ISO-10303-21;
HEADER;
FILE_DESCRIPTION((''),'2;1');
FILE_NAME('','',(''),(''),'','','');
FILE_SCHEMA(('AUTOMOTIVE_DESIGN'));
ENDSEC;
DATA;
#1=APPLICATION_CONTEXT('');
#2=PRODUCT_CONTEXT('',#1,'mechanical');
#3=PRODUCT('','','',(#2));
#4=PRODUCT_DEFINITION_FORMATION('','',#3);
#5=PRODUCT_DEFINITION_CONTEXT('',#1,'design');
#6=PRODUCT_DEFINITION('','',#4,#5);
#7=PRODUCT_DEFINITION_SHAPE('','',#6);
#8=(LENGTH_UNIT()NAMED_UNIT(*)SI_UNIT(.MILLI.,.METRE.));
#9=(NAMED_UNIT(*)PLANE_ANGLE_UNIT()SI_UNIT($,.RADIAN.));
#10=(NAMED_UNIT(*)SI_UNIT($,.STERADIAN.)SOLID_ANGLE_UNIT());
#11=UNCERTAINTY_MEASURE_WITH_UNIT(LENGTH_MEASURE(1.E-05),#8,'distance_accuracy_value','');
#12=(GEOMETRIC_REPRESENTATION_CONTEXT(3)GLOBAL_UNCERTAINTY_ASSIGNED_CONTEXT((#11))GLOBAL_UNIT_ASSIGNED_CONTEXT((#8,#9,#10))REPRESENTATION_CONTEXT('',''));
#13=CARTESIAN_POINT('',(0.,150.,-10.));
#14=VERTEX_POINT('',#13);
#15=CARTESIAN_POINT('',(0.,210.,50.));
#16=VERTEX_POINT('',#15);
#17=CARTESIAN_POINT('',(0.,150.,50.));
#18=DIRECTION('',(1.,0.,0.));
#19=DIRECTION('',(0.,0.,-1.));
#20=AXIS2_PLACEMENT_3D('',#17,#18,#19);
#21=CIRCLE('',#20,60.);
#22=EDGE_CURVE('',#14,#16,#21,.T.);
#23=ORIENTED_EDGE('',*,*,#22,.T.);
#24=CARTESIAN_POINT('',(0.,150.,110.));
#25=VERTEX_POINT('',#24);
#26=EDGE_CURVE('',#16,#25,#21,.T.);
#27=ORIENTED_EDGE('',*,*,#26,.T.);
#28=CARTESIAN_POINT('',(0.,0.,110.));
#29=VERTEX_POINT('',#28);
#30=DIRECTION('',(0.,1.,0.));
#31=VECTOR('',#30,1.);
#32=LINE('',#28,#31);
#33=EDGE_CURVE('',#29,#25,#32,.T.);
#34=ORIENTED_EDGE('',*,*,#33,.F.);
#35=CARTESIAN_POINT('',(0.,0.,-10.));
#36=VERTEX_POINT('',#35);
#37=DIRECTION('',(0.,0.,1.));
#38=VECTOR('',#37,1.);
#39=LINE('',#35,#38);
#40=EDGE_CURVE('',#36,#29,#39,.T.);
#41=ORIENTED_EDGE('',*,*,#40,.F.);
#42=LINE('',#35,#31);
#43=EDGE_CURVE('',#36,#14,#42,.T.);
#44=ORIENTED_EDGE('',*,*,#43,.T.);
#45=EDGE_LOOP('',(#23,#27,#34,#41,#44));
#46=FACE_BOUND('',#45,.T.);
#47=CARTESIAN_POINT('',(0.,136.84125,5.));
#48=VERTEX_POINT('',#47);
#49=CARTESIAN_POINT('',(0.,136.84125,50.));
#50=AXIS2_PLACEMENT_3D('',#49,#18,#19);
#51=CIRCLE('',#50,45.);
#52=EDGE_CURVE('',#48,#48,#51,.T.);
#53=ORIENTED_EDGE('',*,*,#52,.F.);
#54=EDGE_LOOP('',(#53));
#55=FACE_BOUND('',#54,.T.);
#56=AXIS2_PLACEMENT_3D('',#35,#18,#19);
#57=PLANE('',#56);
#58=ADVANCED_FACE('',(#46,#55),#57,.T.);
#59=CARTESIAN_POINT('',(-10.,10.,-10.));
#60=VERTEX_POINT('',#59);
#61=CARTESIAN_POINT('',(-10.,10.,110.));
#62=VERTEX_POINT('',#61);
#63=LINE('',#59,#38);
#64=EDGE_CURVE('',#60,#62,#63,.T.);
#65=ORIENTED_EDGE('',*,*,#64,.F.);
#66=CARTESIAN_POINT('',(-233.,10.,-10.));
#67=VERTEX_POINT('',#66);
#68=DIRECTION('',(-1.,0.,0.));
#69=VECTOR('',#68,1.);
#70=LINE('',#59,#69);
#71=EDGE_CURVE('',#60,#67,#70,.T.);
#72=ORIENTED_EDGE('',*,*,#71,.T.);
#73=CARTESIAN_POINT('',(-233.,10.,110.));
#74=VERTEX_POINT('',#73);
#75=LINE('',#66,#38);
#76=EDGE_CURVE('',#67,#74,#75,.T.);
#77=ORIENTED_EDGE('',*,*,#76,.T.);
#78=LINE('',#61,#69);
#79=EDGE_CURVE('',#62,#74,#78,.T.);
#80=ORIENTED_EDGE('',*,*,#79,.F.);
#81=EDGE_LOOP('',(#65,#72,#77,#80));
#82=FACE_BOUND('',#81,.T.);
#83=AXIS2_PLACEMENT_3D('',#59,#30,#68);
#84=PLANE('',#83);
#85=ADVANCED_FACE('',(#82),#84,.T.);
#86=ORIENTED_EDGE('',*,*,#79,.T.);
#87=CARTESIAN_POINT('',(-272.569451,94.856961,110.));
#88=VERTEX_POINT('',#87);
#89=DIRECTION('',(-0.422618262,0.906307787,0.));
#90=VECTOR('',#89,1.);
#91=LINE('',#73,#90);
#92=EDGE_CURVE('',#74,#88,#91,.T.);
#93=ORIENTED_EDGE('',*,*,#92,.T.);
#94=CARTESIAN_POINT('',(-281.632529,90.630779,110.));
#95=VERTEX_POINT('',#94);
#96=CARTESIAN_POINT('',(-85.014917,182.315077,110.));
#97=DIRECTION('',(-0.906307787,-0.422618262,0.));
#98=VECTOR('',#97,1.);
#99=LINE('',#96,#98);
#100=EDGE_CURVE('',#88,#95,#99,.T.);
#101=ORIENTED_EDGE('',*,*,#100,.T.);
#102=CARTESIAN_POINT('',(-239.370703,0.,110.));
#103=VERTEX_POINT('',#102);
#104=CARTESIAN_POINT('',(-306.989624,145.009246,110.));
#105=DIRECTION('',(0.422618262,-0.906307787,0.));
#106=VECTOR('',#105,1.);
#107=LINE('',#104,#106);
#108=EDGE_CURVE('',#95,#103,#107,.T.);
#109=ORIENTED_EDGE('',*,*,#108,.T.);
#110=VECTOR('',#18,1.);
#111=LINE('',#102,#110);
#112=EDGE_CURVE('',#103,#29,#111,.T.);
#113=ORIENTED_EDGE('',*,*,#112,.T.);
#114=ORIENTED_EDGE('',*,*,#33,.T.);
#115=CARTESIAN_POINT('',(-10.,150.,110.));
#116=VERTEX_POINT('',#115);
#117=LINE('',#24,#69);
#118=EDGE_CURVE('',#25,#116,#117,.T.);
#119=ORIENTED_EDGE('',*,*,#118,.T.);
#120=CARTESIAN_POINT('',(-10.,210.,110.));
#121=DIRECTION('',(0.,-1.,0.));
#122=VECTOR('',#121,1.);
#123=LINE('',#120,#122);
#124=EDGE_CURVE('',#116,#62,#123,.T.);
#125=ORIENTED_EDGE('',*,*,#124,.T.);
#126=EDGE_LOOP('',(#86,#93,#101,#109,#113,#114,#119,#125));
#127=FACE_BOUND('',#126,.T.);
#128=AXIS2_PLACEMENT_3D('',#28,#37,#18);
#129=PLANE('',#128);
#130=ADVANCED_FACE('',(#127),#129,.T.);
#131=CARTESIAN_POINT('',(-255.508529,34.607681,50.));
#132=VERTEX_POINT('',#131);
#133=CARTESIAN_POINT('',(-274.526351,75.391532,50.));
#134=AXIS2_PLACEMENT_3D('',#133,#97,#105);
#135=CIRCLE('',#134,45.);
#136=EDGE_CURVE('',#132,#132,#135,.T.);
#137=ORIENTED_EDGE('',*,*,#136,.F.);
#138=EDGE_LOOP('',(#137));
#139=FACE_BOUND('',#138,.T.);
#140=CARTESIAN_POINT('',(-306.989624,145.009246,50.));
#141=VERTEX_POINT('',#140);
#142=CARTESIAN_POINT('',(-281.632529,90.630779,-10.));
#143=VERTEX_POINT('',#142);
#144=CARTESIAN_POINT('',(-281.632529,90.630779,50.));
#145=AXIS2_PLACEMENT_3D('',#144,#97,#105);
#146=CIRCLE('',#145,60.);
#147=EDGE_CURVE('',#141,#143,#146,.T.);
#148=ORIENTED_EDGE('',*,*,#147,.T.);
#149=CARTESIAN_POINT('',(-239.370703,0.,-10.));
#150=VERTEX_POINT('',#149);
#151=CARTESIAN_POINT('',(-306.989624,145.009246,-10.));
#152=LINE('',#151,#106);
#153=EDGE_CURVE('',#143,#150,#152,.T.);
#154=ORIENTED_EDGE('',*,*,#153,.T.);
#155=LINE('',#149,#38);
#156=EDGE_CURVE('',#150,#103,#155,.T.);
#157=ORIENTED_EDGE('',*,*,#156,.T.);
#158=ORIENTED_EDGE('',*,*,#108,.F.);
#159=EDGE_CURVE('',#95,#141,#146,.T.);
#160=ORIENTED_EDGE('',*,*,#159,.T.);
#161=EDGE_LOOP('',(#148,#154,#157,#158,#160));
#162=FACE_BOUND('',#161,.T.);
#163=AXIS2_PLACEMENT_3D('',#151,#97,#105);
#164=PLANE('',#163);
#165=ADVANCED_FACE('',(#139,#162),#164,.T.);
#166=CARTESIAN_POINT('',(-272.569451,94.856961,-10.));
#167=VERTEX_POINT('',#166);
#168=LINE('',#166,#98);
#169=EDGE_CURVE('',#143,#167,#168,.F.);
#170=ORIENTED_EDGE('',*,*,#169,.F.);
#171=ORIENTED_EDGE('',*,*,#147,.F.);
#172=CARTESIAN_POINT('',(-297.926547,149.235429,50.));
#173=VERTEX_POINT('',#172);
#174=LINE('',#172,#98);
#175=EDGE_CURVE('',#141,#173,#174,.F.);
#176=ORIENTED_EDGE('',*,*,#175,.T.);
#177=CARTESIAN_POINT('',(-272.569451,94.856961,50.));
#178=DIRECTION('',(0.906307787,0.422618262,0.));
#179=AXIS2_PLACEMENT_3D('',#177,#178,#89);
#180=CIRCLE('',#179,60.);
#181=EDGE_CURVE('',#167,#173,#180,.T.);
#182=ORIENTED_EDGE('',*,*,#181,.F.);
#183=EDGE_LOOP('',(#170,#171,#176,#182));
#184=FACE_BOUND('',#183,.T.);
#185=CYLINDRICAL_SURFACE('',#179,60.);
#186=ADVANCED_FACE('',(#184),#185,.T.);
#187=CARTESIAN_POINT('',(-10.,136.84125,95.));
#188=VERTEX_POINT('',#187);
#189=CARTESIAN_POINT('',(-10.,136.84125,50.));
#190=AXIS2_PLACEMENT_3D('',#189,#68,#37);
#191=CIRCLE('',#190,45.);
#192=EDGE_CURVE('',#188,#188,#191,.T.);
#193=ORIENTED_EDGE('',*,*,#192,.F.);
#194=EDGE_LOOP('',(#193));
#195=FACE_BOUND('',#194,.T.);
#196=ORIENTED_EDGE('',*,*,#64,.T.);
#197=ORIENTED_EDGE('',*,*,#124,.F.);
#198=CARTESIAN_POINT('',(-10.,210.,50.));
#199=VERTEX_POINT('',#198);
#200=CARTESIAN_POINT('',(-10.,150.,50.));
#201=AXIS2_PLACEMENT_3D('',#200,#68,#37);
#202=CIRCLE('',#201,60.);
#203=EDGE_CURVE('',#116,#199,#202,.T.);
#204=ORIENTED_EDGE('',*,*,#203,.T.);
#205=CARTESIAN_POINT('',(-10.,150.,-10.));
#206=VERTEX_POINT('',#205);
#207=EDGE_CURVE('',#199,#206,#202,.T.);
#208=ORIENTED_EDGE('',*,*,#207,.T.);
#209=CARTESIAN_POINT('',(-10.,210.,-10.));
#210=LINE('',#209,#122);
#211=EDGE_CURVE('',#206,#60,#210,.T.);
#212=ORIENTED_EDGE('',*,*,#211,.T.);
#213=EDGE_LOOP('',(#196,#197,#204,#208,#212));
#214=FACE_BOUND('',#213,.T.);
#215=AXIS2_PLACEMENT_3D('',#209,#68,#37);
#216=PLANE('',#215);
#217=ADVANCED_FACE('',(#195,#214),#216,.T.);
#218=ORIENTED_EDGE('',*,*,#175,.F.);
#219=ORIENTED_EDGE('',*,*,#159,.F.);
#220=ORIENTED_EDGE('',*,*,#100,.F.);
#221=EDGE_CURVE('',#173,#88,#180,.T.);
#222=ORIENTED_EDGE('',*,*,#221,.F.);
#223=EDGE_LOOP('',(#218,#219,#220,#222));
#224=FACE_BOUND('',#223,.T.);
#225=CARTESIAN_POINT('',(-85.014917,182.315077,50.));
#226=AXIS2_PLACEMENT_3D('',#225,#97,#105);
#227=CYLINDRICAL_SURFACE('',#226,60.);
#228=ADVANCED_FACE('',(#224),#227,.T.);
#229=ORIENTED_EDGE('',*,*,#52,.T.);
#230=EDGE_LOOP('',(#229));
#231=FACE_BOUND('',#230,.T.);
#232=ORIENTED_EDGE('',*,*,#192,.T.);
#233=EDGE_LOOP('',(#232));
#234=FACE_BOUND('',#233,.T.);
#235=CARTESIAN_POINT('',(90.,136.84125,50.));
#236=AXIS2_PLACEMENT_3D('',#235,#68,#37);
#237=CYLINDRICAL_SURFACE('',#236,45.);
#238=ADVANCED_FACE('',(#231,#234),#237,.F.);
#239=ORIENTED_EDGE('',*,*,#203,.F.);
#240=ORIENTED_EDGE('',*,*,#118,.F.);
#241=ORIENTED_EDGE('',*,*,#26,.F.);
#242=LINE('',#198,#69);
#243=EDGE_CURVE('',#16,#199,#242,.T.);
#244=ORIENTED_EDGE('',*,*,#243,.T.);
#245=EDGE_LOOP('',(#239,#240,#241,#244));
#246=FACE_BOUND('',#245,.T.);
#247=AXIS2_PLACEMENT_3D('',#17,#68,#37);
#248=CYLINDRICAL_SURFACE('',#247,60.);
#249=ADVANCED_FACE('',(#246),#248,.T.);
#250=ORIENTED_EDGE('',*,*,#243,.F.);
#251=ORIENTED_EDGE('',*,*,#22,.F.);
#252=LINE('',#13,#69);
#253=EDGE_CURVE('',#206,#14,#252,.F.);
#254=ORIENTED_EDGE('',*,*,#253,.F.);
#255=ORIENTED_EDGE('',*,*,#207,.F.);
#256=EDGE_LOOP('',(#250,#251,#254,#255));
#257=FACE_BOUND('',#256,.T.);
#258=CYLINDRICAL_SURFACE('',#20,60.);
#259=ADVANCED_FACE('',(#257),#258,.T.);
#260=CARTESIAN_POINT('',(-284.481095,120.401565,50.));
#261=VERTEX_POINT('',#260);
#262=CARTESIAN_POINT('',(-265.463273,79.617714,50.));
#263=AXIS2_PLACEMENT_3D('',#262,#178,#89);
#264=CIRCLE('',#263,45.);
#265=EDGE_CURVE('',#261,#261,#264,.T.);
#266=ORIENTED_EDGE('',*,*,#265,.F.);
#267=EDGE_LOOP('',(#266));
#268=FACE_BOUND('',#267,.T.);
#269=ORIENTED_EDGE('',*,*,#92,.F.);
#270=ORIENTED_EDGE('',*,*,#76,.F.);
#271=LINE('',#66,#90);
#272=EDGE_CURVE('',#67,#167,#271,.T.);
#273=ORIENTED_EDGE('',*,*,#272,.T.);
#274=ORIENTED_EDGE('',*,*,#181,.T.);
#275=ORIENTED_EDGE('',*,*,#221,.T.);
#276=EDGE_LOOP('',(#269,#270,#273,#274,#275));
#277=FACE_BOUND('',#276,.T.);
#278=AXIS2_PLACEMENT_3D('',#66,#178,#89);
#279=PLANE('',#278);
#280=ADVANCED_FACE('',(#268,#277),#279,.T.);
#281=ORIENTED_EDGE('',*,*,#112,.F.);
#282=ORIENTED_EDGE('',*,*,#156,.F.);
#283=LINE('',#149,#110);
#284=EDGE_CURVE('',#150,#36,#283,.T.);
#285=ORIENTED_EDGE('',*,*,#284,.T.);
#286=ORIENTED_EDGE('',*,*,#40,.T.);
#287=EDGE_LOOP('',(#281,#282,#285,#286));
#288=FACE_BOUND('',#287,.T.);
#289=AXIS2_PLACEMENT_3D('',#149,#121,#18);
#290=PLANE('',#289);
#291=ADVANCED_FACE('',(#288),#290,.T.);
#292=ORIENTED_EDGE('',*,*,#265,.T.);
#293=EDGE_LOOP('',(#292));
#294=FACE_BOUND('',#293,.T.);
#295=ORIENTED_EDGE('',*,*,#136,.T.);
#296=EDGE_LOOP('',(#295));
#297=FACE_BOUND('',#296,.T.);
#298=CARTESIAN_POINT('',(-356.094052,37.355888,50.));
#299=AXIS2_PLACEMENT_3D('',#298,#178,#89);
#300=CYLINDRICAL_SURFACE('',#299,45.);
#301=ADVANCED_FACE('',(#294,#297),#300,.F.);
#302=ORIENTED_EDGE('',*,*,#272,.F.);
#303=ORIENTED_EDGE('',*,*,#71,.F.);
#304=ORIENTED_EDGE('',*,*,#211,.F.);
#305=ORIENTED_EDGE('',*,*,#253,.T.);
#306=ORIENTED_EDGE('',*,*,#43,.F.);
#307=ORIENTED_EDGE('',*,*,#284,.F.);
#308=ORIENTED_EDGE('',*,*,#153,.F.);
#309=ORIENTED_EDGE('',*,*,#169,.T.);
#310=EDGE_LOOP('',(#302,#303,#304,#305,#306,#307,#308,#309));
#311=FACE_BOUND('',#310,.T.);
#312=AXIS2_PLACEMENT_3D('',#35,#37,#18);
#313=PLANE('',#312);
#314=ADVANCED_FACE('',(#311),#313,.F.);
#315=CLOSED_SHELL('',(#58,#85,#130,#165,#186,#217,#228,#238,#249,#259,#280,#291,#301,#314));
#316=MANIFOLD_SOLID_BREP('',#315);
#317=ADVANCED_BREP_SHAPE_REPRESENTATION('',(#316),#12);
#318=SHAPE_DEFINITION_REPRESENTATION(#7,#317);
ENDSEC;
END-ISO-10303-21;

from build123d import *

# Parameters (mm, degrees)
SALIENTE_EXTRUIR1_DEPTH      = 110
SALIENTE_EXTRUIR1_DEPTH_BACK = 10
CROQUIS2_R                   = 45
CORTAR_EXTRUIR1_DEPTH        = 100
CROQUIS3_R                   = 45
CORTAR_EXTRUIR2_DEPTH        = 100
FILLET1_R                    = 60


with BuildPart() as part:
    # Croquis1 → Saliente-Extruir1 (new, two sides: drawn at the far end of the back side and taken through both)
    with BuildSketch(Plane.XY.offset(-SALIENTE_EXTRUIR1_DEPTH_BACK)):
        Polygon((-306.989624487, 145.009245926), (-239.370702608, 0), (0, 0), (0, 210), (-10, 210), (-10, 10), (-233, 10), (-297.926546616, 149.235428543), align=None)
    extrude(amount=SALIENTE_EXTRUIR1_DEPTH + SALIENTE_EXTRUIR1_DEPTH_BACK)

    # Croquis2 → Cortar-Extruir1 (cut)
    with BuildSketch(Plane.ZY.offset(10)):
        with Locations((50, 136.841249694)):
            Circle(CROQUIS2_R)
    extrude(amount=-CORTAR_EXTRUIR1_DEPTH, mode=Mode.SUBTRACT)

    # Croquis3 → Cortar-Extruir2 (cut)
    with BuildSketch(Plane(origin=(-187.554534313, -87.458115672, 0), x_dir=(0, 0, -1), z_dir=(0.906307787036651, 0.4226182617406971, 0))):
        with Locations(Location((-50, 184.347781552, 0), (0, 0, 90))):
            Circle(CROQUIS3_R)
    extrude(amount=-CORTAR_EXTRUIR2_DEPTH, mode=Mode.SUBTRACT)

    # Fillet1
    fillet1_edges = [part.edges().sort_by_distance(p)[0] for p in [
        (-5, 210, 110),
        (-5, 210, -10),
        (-302.458085551, 147.122337235, -10),
        (-302.458085551, 147.122337235, 110),
    ]]
    fillet(fillet1_edges, radius=FILLET1_R - 0.0001)  # a hair under: the kernel refuses the full size


solid = part.part
